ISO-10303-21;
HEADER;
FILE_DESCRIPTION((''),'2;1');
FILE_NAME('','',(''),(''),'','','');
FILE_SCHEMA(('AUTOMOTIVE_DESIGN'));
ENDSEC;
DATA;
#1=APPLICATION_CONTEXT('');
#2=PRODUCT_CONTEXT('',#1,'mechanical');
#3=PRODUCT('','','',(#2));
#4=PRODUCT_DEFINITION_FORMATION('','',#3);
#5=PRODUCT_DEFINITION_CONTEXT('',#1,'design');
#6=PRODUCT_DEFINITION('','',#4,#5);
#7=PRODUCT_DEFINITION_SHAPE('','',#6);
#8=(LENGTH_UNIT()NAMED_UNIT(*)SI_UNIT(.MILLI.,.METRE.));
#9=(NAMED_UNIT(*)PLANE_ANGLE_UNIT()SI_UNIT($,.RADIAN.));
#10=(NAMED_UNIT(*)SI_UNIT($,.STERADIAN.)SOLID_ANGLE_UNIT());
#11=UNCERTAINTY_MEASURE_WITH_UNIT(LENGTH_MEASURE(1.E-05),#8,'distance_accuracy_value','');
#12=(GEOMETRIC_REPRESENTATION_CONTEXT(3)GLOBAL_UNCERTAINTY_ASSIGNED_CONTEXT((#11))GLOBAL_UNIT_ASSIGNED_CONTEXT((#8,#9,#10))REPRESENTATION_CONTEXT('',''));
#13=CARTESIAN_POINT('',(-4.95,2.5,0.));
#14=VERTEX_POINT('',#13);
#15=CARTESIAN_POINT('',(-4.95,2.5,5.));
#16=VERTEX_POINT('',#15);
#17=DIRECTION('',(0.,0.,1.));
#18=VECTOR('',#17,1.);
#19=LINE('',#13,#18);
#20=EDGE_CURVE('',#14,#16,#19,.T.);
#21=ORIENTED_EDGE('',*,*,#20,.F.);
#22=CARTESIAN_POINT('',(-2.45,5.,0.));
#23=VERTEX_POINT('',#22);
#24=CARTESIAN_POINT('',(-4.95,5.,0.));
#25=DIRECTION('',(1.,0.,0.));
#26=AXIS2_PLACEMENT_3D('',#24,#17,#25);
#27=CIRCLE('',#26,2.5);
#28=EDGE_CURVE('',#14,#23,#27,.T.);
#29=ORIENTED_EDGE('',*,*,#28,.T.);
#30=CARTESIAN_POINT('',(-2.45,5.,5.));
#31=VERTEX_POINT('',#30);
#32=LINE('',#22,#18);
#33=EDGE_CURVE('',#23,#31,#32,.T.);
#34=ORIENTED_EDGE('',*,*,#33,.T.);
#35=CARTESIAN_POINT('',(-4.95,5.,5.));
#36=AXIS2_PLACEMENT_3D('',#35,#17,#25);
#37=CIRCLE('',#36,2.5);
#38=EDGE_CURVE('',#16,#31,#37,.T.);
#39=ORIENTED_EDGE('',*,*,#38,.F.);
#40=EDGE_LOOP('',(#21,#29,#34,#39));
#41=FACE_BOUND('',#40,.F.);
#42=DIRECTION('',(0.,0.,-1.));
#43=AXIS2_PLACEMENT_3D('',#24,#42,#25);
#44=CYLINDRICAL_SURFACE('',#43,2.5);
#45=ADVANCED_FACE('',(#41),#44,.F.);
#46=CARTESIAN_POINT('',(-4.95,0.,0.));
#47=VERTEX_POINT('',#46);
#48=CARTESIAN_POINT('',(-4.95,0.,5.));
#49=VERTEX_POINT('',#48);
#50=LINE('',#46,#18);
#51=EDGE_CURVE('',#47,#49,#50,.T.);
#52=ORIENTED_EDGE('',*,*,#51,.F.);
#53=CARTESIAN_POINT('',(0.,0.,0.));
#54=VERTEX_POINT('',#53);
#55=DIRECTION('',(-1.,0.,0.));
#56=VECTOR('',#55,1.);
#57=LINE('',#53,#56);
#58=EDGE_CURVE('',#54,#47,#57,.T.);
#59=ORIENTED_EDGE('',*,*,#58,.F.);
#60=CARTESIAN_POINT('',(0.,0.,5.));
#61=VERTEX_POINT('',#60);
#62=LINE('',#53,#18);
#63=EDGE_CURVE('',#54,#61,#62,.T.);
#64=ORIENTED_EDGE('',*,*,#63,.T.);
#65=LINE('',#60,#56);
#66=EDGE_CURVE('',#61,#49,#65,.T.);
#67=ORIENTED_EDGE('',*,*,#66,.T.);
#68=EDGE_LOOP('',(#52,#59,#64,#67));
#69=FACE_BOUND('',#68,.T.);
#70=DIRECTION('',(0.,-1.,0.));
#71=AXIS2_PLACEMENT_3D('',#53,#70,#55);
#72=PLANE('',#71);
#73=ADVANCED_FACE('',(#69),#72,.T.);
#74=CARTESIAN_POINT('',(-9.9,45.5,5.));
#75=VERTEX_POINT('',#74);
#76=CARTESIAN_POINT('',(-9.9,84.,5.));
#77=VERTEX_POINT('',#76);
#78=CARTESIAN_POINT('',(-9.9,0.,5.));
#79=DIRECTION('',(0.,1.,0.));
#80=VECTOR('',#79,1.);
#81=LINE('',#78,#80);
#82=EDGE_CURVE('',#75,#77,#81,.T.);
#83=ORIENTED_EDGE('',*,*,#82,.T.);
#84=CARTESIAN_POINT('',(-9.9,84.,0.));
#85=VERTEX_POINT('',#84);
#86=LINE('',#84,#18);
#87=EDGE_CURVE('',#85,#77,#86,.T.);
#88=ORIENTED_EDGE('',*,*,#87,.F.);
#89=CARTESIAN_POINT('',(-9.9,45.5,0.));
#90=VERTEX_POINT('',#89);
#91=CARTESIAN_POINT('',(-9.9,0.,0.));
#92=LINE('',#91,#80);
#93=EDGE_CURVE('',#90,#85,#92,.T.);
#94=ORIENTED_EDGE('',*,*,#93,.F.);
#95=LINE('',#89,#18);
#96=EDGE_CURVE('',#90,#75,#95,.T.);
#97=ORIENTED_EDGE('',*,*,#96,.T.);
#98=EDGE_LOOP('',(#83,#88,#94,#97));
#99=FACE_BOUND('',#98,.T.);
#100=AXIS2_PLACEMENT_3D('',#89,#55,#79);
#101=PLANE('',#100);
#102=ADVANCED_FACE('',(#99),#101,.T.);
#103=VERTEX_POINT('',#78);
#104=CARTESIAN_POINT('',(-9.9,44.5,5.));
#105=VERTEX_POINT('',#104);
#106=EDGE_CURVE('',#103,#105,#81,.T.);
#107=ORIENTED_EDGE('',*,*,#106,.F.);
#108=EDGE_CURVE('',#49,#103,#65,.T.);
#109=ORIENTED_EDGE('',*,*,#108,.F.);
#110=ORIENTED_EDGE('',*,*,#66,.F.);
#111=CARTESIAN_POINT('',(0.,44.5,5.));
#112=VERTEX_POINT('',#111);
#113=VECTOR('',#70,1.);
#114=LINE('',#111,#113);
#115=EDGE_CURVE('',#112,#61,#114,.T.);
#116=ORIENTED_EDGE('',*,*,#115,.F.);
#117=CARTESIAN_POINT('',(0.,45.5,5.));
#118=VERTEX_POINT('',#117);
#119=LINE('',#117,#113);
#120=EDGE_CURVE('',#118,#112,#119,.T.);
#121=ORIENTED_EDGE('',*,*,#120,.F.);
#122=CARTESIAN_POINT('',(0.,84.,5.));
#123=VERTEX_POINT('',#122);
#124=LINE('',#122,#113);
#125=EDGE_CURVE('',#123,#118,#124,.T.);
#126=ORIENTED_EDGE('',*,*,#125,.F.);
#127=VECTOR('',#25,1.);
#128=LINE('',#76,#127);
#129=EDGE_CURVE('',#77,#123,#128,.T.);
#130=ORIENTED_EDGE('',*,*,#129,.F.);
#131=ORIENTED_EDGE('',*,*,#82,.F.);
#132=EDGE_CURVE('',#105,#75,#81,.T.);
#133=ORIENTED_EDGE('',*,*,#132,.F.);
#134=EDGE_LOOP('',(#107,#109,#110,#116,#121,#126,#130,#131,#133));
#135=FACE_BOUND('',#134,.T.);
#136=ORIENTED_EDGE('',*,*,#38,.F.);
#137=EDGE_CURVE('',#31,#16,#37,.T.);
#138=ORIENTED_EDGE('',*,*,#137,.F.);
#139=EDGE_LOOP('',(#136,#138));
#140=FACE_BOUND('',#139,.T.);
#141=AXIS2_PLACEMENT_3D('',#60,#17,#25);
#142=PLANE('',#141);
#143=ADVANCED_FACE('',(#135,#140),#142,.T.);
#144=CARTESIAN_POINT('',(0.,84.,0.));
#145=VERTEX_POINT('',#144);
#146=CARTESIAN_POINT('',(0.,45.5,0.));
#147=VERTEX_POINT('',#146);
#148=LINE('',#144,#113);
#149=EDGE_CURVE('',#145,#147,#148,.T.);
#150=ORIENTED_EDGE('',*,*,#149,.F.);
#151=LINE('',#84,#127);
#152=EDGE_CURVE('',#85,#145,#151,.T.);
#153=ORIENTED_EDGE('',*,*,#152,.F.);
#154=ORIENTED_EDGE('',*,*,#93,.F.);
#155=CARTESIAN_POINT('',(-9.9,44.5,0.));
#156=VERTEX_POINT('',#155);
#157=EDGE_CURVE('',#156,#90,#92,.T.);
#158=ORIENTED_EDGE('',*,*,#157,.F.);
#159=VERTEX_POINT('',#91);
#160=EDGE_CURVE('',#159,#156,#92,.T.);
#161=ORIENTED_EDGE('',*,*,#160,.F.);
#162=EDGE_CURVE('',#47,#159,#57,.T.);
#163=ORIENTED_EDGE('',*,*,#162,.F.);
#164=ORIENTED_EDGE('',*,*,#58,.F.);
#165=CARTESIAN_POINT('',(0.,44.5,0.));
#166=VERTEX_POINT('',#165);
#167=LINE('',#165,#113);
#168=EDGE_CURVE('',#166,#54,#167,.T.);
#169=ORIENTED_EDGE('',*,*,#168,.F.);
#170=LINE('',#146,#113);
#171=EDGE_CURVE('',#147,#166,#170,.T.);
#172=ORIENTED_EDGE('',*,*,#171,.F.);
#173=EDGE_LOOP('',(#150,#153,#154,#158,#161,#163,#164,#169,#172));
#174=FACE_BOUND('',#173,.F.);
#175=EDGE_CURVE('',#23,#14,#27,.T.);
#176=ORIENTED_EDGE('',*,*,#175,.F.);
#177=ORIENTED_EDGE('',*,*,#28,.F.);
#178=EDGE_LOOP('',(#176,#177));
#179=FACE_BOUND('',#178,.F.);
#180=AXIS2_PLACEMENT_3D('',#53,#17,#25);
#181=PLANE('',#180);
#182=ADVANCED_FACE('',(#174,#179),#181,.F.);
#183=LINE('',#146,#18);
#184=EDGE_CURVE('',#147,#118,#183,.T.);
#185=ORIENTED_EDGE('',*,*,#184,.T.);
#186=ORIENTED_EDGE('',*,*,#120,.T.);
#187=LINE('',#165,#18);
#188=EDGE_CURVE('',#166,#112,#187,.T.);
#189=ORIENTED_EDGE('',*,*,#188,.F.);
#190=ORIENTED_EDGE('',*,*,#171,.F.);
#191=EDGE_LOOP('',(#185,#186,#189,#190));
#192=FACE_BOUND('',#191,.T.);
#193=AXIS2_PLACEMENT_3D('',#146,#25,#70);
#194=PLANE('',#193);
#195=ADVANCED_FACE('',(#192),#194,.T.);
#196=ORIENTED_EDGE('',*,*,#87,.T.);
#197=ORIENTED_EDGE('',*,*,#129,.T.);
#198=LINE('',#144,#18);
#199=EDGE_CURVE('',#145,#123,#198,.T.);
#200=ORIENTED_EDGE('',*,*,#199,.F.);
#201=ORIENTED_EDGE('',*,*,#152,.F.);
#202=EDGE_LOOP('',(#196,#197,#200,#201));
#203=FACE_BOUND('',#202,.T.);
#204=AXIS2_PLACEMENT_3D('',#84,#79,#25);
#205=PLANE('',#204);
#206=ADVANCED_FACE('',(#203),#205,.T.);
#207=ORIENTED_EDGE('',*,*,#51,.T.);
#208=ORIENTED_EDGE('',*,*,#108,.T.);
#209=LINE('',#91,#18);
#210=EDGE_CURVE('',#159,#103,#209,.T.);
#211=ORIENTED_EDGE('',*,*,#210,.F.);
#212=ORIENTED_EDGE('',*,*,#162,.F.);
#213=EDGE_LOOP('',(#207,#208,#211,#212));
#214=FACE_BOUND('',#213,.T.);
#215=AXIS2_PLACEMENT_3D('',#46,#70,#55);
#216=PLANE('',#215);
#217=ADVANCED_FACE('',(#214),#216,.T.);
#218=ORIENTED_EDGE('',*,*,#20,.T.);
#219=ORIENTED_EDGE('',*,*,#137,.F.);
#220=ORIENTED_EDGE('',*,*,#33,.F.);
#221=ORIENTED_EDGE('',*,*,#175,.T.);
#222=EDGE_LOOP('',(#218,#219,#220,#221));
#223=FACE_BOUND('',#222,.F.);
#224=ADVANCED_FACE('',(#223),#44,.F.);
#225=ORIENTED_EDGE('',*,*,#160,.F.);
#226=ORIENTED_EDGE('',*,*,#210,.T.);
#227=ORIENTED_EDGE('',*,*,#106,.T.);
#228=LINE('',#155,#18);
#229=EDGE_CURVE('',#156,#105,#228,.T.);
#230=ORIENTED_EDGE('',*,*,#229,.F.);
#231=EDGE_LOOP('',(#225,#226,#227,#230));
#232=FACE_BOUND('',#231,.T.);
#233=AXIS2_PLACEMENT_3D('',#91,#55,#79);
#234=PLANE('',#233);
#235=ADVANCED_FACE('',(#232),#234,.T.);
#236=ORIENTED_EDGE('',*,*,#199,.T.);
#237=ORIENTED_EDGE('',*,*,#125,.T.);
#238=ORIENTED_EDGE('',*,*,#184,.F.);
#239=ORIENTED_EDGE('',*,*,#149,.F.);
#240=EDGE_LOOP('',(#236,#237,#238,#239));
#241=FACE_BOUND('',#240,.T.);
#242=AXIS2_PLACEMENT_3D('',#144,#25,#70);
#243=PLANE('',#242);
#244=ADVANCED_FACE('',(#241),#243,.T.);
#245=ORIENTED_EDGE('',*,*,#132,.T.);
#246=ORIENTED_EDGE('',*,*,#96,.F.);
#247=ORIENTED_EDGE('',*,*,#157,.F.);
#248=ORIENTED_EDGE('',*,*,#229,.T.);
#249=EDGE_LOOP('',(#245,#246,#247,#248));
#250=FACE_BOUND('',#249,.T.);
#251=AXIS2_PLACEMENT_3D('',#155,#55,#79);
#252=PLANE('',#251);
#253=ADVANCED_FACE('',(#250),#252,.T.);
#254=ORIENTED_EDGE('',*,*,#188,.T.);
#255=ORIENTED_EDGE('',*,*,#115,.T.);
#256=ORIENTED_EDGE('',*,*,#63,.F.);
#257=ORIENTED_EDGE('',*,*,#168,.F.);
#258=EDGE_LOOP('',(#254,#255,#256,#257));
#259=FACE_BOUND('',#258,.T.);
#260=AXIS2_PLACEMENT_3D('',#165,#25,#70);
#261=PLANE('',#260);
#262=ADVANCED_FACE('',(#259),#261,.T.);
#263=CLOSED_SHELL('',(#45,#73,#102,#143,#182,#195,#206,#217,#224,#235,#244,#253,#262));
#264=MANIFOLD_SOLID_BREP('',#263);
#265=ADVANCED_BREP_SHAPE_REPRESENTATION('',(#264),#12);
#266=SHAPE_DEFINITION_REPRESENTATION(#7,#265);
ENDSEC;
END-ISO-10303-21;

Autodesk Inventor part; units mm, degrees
ref_plane "YZ Plane" through (0, 0, 0) normal (1, 0, 0) x (0, 1, 0)
ref_plane "XZ Plane" through (0, 0, 0) normal (0, 1, 0) x (-1, 0, 0)
ref_plane "XY Plane" through (0, 0, 0) normal (0, 0, 1) x (1, 0, 0)
sketch "Sketch2" plane through (0, 0, 0) normal (0, 0, 1) x (1, 0, 0)
  line L0 (0, 0) -> (-9.9, 0)
  line L1 (-4.95, 0) -> (-4.95, 2.5)
  line L2 (-4.95, 0) -> (-2.45, 0) construction
  circle A0 centre (-4.95, 5) radius 2.5
  line L3 (-4.95, 7.5) -> (32.05, 7.5) construction
  line L4 (0, 44.5) -> (0, 0)
  line L5 (0, 0) -> (-9.9, 0)
  line L6 (-9.9, 0) -> (-9.9, 44.5)
  line L7 (0, 45.5) -> (0, 0)
  line L8 (0, 0) -> (-9.9, 0)
  line L9 (-9.9, 0) -> (-9.9, 45.5)
  line L10 (-4.95, 7.5) -> (66.05, 7.5) construction
  line L11 (0, 0) -> (-9.9, 0)
  line L12 (-9.9, 0) -> (-9.9, 84)
  line L13 (-9.9, 84) -> (0, 84)
  line L14 (0, 84) -> (0, 0)
  dimension "d35" = 5
  dimension "d33" = 2.5
  dimension "d34" = 90
  dimension "d47" = 84
extrude "Extrusion6" add sketch "Sketch2" along normal blind 5
properties part number "Elbow_Cube_Holder_TestFit_V2"
